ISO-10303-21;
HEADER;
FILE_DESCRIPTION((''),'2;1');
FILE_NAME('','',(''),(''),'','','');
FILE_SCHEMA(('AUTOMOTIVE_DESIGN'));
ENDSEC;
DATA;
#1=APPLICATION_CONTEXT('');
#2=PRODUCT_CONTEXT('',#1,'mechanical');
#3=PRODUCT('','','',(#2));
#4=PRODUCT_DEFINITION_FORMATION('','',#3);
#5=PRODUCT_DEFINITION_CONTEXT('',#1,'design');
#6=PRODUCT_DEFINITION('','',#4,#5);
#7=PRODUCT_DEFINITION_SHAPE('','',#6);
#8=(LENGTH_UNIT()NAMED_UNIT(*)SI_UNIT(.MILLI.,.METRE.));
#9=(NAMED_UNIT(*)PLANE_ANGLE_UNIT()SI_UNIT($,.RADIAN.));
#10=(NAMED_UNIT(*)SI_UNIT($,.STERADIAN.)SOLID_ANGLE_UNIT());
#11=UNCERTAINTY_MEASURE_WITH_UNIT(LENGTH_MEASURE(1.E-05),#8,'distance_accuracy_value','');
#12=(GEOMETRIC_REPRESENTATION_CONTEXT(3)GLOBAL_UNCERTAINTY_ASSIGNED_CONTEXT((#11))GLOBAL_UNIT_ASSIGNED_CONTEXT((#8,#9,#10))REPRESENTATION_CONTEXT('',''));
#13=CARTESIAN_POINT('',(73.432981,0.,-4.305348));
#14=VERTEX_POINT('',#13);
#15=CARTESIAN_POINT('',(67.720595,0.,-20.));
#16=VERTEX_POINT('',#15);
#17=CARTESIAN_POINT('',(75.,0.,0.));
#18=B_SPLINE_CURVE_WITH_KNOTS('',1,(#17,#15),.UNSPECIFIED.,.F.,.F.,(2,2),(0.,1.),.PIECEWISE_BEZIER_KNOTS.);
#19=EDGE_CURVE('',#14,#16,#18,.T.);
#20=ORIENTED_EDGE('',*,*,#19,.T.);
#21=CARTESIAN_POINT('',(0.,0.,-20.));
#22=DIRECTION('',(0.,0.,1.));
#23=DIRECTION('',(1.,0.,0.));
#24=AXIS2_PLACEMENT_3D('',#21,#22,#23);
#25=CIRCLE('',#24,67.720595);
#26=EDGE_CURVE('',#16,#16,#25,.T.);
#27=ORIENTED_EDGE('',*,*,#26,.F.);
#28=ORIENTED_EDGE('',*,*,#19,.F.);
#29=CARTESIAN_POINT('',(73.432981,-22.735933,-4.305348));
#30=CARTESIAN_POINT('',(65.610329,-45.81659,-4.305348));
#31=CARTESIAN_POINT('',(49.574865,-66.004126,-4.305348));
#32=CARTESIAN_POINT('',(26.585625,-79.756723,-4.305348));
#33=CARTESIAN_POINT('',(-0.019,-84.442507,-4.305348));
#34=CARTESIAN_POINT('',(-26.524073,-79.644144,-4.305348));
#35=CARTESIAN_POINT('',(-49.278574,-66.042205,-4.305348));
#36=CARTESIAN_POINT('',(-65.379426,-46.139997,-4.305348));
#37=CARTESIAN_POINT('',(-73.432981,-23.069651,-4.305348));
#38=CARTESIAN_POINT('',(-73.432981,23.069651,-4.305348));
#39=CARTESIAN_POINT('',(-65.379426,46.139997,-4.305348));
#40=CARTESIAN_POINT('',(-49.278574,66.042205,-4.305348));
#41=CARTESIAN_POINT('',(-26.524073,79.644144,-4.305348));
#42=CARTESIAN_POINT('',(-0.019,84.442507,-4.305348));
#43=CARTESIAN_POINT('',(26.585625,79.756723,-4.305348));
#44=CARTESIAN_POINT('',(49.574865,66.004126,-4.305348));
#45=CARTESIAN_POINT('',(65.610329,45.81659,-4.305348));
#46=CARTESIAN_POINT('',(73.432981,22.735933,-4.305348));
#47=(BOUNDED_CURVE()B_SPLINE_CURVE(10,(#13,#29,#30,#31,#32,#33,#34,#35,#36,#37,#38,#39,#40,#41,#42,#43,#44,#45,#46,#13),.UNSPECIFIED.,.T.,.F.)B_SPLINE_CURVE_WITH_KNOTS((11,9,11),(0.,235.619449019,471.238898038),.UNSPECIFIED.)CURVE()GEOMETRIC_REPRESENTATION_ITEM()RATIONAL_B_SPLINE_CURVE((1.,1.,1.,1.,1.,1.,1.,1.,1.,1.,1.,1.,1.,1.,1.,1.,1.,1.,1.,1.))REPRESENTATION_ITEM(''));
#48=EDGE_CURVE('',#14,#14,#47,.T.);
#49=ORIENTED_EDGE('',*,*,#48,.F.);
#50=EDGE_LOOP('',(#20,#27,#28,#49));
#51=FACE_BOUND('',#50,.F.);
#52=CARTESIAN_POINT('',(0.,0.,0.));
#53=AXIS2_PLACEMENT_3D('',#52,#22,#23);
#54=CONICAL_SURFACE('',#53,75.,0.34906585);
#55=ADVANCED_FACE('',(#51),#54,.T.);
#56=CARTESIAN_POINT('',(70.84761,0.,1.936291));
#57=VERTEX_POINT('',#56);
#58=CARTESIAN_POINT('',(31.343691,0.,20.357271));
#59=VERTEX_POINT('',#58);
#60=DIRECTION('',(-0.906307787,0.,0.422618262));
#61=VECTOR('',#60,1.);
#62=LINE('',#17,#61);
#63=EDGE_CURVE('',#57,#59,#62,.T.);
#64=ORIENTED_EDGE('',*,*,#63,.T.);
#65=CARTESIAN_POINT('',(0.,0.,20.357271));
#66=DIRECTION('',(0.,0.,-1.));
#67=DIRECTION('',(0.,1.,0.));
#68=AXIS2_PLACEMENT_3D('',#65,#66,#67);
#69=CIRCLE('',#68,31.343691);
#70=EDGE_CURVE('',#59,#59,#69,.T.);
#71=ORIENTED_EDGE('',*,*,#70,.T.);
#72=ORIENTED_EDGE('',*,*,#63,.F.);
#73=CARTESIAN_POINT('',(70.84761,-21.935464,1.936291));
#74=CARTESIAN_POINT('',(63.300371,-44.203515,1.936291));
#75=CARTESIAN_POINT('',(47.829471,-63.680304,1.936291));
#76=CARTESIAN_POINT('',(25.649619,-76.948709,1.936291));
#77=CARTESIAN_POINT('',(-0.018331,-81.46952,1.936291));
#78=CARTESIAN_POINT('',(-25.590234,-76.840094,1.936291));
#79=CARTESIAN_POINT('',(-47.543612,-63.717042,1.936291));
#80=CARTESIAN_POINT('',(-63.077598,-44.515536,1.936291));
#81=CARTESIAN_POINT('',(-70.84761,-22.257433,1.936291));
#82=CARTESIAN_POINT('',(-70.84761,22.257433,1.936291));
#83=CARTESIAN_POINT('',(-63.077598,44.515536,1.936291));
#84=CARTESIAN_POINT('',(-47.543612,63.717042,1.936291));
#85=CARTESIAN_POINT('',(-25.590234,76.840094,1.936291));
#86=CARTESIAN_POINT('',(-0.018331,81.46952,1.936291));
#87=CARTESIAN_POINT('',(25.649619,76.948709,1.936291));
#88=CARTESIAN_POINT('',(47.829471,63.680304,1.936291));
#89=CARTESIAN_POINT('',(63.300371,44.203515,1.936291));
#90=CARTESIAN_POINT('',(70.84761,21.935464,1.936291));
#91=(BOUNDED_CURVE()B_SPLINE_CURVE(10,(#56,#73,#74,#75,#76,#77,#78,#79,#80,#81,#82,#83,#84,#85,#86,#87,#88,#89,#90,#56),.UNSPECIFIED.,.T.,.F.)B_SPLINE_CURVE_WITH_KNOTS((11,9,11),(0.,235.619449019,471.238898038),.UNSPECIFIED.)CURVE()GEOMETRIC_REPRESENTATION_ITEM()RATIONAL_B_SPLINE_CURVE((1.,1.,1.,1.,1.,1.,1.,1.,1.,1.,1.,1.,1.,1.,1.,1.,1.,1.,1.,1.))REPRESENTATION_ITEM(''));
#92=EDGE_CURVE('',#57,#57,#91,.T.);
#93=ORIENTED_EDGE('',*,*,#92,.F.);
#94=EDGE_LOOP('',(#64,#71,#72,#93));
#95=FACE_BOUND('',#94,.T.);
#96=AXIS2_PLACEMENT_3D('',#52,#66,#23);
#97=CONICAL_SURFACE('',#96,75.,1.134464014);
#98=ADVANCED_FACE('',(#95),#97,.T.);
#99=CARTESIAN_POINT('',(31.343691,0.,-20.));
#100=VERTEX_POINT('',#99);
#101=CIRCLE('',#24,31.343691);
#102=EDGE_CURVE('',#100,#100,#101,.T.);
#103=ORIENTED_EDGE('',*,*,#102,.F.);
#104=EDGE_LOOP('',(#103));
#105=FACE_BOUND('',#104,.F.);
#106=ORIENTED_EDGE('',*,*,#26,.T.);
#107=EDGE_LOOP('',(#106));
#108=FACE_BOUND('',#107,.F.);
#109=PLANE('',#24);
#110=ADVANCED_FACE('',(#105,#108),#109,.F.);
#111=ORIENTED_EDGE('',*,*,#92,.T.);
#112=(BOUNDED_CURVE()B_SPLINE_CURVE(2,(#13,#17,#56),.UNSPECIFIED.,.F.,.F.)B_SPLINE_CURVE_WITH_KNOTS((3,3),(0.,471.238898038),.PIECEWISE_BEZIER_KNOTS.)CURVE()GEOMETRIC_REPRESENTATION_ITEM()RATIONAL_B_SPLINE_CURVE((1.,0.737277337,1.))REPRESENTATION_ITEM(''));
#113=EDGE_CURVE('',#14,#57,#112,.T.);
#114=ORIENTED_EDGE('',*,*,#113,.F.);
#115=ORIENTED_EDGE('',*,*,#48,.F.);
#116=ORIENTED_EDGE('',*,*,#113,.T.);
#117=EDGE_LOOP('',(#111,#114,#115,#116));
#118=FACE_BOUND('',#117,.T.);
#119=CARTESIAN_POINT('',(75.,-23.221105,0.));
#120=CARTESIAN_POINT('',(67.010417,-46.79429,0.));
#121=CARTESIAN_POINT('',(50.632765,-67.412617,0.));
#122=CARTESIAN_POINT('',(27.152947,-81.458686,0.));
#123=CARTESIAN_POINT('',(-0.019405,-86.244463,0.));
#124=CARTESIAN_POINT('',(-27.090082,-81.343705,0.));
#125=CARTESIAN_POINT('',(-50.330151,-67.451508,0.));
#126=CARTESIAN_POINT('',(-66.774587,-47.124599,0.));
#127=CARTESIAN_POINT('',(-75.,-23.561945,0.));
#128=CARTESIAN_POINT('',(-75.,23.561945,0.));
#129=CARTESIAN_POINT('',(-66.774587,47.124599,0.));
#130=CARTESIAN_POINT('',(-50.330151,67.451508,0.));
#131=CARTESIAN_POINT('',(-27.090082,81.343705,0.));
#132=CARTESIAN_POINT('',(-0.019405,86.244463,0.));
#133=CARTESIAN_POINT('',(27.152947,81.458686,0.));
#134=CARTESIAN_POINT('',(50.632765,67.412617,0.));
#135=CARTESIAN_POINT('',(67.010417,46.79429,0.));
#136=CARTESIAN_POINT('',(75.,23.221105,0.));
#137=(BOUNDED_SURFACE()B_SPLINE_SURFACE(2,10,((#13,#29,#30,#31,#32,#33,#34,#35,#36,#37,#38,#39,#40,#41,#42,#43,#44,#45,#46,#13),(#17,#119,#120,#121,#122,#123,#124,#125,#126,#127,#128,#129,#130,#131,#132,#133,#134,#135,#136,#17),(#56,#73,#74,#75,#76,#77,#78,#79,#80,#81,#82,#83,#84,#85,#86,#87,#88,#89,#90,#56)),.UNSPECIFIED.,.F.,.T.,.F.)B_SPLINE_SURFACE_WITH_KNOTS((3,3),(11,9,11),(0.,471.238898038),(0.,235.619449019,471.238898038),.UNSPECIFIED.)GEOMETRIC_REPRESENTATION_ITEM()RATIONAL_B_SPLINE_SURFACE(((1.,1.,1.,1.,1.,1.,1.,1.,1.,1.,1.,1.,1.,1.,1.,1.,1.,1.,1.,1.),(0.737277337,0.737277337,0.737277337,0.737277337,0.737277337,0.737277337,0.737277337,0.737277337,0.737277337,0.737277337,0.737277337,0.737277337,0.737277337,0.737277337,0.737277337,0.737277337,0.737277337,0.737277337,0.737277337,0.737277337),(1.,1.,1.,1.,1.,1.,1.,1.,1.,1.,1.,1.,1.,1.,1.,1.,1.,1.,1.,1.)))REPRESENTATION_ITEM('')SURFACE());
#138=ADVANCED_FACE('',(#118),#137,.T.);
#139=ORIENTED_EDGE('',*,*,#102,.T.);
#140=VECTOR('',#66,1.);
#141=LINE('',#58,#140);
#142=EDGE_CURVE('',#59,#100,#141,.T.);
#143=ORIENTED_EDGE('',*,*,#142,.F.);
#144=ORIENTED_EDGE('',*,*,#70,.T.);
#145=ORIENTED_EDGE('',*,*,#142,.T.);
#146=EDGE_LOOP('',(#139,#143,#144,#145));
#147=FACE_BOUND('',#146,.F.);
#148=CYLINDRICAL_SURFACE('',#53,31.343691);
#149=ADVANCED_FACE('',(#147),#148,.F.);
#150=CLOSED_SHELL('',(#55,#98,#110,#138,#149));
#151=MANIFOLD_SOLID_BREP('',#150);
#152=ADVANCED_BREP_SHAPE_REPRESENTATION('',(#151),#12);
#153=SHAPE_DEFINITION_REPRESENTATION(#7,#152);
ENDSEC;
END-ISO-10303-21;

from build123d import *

# Parameters (mm, degrees)
F0_R          = 75
F1_DEPTH      = 50
F1_TAPER      = 65
F1_DEPTH_BACK = 20
F1_TAPER_BACK = 20
F2_R          = 5
F3_R          = 31.3436912466
F4_DEPTH      = 50
F4_DEPTH_BACK = 25


with BuildPart() as f1:
    # F0 (on Top) → F1 (new body, two sides)
    with BuildSketch(Plane.XY) as f1_sk:
        Circle(F0_R)
    extrude(amount=F1_DEPTH, taper=F1_TAPER)
    extrude(f1_sk.sketch, amount=-F1_DEPTH_BACK, taper=F1_TAPER_BACK)

    # F2
    f2_edges = [f1.edges().sort_by_distance(p)[0] for p in [
        (-75, 0, 0),
    ]]
    fillet(f2_edges, radius=F2_R)

    # F3 (on Top) → F4 (cut, two sides)
    with BuildSketch(Plane.XY) as f4_sk:
        Circle(F3_R)
    extrude(amount=F4_DEPTH, mode=Mode.SUBTRACT)
    extrude(f4_sk.sketch, amount=-F4_DEPTH_BACK, mode=Mode.SUBTRACT)


solid = f1.part
